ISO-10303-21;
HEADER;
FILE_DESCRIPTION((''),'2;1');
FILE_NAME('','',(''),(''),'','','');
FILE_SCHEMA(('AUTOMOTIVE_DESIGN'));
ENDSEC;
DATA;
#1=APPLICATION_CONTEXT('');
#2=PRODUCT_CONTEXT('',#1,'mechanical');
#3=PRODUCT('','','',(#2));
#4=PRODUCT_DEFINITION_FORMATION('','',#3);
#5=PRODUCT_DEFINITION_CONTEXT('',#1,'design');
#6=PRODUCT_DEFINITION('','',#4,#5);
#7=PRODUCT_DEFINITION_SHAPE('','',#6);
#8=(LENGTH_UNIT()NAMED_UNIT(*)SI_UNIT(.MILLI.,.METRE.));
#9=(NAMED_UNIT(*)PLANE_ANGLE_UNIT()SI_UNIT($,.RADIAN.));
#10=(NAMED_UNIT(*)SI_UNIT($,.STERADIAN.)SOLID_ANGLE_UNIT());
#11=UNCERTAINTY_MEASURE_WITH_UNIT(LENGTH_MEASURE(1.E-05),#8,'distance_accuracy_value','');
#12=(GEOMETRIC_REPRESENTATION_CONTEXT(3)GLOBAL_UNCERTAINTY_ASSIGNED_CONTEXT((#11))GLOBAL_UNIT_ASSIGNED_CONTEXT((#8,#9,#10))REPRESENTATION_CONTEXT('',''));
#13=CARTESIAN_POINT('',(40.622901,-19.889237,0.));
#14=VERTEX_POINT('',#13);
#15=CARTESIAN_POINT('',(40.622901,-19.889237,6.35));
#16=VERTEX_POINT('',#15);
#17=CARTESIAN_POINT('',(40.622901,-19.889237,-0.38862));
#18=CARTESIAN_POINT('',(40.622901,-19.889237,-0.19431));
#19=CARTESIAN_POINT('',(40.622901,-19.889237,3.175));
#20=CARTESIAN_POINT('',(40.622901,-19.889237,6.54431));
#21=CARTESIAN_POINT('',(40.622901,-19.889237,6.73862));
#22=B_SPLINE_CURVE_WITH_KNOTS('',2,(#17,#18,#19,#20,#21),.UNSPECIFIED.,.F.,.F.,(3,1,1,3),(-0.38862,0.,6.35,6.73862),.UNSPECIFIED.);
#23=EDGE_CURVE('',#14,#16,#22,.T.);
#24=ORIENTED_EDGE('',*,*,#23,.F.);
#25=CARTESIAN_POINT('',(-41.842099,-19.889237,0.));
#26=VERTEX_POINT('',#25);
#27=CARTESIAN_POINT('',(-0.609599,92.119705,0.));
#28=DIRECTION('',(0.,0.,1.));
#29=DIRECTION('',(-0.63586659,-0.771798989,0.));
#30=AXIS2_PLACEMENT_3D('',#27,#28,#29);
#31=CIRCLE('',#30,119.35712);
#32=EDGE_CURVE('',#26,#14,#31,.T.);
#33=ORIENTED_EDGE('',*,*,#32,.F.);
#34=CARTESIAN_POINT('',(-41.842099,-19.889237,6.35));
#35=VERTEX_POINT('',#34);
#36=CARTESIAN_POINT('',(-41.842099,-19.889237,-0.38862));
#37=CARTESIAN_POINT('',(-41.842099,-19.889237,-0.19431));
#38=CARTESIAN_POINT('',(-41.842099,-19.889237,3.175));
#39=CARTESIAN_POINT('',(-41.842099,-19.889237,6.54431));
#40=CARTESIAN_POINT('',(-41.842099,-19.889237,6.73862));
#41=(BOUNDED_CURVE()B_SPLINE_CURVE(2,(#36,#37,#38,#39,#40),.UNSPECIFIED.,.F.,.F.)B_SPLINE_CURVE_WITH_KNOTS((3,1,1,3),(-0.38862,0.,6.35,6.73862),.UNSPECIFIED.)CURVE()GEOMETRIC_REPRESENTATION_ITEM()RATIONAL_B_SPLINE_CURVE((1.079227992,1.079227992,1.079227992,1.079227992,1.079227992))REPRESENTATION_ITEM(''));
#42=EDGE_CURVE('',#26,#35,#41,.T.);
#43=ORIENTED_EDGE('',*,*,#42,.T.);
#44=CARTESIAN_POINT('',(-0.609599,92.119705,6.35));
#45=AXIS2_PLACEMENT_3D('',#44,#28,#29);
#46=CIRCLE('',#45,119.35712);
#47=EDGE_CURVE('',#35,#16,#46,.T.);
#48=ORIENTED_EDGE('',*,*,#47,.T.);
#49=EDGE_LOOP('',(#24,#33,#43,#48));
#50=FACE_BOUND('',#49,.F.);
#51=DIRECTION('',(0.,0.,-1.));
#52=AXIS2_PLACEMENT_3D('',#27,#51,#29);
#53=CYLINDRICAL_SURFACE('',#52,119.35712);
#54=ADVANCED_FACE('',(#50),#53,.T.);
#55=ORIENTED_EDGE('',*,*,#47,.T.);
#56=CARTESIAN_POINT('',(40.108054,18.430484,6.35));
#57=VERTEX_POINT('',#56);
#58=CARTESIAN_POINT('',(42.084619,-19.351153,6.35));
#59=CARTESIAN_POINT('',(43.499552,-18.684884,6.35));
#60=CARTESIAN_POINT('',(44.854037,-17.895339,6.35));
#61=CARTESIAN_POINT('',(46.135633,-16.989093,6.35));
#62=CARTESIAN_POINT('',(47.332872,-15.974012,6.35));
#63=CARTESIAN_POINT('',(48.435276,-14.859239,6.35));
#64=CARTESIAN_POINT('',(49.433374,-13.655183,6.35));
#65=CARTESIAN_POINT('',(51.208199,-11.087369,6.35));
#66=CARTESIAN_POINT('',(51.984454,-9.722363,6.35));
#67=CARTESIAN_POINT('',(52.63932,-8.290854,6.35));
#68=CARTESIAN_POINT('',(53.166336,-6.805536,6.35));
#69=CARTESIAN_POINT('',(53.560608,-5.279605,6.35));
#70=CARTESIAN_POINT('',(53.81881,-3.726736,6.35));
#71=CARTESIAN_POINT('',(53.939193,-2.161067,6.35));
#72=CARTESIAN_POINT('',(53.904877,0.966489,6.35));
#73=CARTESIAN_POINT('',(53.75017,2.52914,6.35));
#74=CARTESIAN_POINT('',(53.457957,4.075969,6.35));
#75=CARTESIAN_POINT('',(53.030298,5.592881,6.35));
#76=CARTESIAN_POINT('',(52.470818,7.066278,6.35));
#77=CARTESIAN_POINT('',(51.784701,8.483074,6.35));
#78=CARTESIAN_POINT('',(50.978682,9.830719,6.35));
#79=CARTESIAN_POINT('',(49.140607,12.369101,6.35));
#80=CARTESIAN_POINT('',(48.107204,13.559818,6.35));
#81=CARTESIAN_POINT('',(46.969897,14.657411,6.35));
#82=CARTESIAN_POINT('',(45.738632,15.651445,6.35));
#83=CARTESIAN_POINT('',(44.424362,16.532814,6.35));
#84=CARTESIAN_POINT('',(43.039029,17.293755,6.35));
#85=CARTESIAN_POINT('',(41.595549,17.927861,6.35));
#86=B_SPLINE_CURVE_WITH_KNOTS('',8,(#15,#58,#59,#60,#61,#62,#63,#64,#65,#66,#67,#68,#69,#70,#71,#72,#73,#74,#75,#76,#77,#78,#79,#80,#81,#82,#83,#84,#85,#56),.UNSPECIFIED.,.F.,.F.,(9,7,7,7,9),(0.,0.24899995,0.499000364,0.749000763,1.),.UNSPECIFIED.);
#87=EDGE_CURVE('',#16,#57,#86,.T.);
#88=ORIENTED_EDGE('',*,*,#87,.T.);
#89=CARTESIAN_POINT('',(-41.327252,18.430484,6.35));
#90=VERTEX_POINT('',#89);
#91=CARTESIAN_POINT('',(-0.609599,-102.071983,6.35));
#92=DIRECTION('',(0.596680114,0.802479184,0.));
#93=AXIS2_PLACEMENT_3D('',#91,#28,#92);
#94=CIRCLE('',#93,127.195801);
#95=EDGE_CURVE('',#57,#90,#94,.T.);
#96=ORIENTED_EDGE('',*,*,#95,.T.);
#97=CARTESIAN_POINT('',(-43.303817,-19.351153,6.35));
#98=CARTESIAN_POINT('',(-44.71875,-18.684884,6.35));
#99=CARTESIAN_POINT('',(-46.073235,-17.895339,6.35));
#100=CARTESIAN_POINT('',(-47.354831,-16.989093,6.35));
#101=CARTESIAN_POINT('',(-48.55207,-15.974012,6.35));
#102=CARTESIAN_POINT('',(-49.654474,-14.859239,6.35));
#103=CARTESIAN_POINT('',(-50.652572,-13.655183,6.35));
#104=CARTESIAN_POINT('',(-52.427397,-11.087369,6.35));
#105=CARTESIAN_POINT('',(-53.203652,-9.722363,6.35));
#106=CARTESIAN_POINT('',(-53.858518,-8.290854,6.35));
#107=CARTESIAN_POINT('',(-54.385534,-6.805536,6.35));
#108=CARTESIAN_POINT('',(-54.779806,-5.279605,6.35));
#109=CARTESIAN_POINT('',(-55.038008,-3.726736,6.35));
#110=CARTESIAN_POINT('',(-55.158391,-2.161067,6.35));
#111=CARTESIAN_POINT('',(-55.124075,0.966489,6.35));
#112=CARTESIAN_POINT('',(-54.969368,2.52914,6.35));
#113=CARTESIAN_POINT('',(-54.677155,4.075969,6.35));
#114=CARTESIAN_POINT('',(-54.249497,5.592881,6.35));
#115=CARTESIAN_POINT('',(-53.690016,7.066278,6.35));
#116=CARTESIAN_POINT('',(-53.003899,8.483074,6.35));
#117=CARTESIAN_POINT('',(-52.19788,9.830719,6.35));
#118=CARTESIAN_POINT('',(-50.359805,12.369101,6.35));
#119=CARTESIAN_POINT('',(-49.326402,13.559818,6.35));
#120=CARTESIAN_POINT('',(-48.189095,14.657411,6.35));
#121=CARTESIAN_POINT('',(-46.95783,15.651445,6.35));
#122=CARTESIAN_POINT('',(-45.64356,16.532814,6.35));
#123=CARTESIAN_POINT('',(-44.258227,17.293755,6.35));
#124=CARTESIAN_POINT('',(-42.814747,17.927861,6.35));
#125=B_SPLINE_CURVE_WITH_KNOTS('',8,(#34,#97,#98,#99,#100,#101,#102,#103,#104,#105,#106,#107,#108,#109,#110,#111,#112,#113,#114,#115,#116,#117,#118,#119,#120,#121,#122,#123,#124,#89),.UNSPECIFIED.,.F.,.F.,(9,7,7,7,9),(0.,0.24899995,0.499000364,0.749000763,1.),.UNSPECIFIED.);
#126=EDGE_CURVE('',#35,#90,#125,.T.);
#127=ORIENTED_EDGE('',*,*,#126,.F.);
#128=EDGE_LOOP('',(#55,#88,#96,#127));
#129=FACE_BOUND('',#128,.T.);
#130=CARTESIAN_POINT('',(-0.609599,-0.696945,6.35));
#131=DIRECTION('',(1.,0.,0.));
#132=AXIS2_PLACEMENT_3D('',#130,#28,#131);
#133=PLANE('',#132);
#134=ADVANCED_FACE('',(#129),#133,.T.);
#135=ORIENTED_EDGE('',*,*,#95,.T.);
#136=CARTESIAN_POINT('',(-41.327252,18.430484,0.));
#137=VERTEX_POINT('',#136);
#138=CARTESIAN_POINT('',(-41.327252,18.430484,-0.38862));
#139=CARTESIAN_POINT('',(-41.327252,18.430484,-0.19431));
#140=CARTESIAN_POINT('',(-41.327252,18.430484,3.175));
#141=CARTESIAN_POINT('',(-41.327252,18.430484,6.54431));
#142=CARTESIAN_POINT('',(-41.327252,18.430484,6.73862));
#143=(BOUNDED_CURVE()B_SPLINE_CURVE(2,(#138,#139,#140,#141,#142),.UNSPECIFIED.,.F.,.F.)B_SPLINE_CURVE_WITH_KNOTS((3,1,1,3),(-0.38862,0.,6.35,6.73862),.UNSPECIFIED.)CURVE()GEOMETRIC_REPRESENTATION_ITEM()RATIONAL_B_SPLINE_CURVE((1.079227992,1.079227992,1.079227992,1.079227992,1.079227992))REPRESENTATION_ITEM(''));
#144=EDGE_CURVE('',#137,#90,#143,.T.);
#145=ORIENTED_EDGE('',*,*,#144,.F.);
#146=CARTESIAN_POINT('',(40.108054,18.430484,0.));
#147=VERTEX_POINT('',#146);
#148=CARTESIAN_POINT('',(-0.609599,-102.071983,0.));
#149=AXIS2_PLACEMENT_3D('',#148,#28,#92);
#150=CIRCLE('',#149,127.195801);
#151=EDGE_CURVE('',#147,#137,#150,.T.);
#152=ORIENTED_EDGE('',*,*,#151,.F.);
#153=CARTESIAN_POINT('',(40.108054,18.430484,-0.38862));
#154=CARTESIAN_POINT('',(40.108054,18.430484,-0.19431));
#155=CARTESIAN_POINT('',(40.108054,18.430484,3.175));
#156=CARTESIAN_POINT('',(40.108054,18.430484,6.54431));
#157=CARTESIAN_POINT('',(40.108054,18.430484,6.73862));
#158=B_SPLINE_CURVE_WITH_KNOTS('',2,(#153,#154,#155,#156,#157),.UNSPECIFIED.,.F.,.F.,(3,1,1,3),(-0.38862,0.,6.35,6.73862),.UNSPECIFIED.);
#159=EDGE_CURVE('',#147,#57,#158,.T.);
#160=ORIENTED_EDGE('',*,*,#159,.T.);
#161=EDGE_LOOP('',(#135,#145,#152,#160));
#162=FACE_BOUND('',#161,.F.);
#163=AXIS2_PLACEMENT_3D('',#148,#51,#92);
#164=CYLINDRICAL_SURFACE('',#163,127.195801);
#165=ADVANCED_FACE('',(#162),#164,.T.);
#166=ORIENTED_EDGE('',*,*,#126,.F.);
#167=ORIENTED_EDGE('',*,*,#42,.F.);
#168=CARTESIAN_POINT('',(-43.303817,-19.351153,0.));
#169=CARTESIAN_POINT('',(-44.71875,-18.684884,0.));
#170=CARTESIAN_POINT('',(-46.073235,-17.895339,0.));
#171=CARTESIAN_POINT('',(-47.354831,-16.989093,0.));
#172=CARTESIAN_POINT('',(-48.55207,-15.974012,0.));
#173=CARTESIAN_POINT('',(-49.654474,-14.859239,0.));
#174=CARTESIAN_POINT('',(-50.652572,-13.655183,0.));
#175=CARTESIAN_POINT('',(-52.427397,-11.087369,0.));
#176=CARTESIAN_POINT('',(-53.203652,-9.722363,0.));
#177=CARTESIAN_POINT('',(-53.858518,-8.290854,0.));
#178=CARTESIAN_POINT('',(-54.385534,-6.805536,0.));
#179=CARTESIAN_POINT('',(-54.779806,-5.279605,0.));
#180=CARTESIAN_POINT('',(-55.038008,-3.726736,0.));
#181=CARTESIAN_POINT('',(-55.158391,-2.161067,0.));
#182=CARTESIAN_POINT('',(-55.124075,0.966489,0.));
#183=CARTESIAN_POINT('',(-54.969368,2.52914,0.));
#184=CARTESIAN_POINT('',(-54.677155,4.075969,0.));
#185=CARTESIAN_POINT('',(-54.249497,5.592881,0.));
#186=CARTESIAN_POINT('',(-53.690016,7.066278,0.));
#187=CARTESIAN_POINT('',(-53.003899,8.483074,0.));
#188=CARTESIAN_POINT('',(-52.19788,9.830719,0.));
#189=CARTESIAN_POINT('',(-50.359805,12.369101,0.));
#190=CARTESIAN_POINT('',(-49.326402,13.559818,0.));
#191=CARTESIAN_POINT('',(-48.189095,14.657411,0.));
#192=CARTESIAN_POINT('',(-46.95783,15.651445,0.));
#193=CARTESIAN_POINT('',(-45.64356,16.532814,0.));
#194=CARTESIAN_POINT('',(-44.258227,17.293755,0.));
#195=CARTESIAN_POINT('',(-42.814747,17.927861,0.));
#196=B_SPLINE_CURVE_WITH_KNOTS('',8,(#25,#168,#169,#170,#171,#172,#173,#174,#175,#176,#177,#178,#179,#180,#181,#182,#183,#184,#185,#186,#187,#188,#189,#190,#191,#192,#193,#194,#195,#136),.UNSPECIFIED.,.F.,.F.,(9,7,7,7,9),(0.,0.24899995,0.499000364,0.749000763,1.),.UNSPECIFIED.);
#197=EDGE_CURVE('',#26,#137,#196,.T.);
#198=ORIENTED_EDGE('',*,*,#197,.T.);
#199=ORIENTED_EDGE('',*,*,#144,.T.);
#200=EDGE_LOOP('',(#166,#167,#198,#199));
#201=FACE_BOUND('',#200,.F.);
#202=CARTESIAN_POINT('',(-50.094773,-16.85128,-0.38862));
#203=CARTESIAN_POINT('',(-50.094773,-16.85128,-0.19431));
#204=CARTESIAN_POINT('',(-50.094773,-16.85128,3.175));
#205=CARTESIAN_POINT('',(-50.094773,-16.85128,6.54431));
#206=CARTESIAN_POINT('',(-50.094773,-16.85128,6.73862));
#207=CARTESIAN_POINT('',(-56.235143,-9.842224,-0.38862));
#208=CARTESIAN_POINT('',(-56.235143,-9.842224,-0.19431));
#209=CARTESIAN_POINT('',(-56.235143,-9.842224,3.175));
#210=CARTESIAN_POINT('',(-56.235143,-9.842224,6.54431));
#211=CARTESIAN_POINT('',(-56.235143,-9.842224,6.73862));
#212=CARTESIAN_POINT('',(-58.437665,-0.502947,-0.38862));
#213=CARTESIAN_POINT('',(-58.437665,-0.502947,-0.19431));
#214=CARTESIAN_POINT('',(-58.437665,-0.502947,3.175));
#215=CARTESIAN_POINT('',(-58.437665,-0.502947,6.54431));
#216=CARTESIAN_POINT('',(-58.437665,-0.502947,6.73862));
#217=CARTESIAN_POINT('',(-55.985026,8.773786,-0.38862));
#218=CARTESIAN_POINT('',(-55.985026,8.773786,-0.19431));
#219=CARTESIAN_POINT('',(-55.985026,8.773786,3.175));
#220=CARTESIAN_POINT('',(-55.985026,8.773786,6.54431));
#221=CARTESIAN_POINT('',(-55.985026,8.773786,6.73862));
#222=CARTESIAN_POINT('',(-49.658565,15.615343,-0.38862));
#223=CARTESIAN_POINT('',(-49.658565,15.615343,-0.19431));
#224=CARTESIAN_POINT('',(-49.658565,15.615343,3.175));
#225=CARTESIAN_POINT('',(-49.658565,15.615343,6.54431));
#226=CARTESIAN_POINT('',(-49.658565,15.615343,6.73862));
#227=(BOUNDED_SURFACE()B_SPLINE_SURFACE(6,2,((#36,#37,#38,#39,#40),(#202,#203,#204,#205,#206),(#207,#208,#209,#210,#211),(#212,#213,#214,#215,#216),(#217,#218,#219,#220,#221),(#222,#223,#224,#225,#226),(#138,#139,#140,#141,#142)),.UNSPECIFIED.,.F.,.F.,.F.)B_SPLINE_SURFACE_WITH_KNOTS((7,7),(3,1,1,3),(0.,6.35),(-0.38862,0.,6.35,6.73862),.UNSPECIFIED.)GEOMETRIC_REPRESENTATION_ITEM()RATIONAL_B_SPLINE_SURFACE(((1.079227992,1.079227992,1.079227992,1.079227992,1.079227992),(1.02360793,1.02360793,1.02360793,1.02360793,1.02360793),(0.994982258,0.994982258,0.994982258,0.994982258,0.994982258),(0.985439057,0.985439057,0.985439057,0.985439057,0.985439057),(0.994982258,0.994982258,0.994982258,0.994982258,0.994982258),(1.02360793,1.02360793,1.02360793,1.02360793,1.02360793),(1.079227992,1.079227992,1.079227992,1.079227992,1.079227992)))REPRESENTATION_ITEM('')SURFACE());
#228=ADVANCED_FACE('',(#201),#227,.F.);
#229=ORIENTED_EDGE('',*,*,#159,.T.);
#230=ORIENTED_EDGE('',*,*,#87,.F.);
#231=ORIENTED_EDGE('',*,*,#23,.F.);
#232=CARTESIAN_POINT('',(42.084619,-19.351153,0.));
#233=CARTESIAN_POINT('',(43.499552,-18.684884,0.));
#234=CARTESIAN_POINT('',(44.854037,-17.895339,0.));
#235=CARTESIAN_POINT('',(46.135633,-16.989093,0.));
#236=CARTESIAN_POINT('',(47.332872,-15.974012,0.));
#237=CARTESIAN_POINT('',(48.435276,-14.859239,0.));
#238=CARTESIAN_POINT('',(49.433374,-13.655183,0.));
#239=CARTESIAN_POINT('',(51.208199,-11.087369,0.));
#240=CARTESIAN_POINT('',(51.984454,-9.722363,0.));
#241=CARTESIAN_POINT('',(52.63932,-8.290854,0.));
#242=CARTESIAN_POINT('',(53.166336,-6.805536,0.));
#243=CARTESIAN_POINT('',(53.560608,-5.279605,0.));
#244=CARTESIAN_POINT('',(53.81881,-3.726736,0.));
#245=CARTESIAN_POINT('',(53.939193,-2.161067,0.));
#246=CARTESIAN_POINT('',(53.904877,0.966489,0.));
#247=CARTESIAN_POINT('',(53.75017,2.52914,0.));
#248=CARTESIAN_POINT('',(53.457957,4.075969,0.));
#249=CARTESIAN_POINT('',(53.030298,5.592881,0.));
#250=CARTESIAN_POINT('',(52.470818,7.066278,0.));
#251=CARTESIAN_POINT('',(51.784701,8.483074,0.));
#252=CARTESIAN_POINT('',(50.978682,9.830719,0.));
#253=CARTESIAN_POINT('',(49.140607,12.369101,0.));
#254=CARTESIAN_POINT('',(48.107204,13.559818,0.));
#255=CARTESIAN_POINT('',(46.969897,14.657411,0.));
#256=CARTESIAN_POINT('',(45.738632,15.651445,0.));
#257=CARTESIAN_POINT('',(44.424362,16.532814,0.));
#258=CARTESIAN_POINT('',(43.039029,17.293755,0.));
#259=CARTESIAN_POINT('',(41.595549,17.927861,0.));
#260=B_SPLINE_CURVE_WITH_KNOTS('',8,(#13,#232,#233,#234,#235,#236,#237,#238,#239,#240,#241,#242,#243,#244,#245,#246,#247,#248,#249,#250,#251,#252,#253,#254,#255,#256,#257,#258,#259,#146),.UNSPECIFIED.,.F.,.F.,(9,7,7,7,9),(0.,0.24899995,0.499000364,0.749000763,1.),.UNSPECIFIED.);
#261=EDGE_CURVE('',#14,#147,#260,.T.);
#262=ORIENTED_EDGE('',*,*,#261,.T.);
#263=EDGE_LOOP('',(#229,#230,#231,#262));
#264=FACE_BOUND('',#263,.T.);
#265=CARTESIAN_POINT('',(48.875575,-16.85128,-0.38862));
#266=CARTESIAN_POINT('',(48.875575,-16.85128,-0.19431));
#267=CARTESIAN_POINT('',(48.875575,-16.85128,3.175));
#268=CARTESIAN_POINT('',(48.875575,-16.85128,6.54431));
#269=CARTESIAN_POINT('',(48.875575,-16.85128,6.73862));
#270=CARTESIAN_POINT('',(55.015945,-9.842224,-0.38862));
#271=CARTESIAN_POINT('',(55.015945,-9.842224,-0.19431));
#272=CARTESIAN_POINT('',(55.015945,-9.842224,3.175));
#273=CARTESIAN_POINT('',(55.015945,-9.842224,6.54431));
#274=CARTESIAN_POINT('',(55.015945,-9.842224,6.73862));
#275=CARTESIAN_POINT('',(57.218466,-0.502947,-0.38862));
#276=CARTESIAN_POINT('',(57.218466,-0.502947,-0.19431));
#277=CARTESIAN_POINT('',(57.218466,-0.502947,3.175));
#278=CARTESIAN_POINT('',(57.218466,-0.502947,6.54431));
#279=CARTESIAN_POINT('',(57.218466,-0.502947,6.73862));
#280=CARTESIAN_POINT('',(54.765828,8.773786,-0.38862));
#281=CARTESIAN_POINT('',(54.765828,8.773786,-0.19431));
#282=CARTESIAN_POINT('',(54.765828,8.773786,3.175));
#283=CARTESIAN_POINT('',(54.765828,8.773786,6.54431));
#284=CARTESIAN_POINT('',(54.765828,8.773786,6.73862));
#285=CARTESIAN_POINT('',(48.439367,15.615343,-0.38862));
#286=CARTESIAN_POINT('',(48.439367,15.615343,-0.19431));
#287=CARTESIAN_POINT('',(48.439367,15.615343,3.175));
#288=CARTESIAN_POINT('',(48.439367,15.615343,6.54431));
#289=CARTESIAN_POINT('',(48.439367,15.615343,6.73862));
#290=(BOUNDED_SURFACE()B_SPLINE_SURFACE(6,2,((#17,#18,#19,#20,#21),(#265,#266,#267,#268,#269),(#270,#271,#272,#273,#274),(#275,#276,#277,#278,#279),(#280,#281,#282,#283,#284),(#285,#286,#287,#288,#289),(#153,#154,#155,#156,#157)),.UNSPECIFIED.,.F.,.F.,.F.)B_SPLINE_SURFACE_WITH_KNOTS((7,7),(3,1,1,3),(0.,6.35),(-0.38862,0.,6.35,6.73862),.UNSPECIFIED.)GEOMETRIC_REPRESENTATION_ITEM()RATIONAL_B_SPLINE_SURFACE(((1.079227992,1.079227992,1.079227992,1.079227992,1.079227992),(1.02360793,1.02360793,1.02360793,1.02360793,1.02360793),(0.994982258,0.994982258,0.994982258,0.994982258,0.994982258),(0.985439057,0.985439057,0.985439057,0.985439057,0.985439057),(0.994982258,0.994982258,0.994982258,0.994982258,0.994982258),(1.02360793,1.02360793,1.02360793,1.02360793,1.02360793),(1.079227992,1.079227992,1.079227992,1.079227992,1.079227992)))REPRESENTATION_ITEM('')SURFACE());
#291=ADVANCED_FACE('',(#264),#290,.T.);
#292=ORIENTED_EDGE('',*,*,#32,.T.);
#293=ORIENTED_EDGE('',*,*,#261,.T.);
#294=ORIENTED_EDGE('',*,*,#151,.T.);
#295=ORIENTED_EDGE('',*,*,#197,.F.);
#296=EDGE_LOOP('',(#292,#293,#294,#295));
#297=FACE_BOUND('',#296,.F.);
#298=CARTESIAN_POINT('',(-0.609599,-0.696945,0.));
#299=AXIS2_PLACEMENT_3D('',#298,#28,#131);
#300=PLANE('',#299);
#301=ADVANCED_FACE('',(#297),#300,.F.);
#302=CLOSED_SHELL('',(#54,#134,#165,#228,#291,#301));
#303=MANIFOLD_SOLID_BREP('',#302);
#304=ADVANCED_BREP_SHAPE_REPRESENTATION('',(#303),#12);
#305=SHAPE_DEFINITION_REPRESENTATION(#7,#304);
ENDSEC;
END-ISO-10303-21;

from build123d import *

# Parameters (mm, degrees)
F1_DEPTH = 6.35
F2_R     = 20.32


with BuildPart() as f1:
    # F0 (on Top) → F1 (new body)
    with BuildSketch(Plane.XY):
        with BuildLine():
            ThreePointArc((-76.504804194, 0), (-0.6095990539, -27.2374155304), (75.2856060863, 0))
            ThreePointArc((75.2856060863, 0), (-0.6095990539, 25.123818391), (-76.504804194, 0))
        make_face()
    extrude(amount=F1_DEPTH)

    # F2
    f2_edges = [f1.edges().sort_by_distance(p)[0] for p in [
        (75.285606, 0, 3.175),
        (-76.504804, 0, 3.175),
    ]]
    fillet(f2_edges, radius=F2_R)


solid = f1.part
